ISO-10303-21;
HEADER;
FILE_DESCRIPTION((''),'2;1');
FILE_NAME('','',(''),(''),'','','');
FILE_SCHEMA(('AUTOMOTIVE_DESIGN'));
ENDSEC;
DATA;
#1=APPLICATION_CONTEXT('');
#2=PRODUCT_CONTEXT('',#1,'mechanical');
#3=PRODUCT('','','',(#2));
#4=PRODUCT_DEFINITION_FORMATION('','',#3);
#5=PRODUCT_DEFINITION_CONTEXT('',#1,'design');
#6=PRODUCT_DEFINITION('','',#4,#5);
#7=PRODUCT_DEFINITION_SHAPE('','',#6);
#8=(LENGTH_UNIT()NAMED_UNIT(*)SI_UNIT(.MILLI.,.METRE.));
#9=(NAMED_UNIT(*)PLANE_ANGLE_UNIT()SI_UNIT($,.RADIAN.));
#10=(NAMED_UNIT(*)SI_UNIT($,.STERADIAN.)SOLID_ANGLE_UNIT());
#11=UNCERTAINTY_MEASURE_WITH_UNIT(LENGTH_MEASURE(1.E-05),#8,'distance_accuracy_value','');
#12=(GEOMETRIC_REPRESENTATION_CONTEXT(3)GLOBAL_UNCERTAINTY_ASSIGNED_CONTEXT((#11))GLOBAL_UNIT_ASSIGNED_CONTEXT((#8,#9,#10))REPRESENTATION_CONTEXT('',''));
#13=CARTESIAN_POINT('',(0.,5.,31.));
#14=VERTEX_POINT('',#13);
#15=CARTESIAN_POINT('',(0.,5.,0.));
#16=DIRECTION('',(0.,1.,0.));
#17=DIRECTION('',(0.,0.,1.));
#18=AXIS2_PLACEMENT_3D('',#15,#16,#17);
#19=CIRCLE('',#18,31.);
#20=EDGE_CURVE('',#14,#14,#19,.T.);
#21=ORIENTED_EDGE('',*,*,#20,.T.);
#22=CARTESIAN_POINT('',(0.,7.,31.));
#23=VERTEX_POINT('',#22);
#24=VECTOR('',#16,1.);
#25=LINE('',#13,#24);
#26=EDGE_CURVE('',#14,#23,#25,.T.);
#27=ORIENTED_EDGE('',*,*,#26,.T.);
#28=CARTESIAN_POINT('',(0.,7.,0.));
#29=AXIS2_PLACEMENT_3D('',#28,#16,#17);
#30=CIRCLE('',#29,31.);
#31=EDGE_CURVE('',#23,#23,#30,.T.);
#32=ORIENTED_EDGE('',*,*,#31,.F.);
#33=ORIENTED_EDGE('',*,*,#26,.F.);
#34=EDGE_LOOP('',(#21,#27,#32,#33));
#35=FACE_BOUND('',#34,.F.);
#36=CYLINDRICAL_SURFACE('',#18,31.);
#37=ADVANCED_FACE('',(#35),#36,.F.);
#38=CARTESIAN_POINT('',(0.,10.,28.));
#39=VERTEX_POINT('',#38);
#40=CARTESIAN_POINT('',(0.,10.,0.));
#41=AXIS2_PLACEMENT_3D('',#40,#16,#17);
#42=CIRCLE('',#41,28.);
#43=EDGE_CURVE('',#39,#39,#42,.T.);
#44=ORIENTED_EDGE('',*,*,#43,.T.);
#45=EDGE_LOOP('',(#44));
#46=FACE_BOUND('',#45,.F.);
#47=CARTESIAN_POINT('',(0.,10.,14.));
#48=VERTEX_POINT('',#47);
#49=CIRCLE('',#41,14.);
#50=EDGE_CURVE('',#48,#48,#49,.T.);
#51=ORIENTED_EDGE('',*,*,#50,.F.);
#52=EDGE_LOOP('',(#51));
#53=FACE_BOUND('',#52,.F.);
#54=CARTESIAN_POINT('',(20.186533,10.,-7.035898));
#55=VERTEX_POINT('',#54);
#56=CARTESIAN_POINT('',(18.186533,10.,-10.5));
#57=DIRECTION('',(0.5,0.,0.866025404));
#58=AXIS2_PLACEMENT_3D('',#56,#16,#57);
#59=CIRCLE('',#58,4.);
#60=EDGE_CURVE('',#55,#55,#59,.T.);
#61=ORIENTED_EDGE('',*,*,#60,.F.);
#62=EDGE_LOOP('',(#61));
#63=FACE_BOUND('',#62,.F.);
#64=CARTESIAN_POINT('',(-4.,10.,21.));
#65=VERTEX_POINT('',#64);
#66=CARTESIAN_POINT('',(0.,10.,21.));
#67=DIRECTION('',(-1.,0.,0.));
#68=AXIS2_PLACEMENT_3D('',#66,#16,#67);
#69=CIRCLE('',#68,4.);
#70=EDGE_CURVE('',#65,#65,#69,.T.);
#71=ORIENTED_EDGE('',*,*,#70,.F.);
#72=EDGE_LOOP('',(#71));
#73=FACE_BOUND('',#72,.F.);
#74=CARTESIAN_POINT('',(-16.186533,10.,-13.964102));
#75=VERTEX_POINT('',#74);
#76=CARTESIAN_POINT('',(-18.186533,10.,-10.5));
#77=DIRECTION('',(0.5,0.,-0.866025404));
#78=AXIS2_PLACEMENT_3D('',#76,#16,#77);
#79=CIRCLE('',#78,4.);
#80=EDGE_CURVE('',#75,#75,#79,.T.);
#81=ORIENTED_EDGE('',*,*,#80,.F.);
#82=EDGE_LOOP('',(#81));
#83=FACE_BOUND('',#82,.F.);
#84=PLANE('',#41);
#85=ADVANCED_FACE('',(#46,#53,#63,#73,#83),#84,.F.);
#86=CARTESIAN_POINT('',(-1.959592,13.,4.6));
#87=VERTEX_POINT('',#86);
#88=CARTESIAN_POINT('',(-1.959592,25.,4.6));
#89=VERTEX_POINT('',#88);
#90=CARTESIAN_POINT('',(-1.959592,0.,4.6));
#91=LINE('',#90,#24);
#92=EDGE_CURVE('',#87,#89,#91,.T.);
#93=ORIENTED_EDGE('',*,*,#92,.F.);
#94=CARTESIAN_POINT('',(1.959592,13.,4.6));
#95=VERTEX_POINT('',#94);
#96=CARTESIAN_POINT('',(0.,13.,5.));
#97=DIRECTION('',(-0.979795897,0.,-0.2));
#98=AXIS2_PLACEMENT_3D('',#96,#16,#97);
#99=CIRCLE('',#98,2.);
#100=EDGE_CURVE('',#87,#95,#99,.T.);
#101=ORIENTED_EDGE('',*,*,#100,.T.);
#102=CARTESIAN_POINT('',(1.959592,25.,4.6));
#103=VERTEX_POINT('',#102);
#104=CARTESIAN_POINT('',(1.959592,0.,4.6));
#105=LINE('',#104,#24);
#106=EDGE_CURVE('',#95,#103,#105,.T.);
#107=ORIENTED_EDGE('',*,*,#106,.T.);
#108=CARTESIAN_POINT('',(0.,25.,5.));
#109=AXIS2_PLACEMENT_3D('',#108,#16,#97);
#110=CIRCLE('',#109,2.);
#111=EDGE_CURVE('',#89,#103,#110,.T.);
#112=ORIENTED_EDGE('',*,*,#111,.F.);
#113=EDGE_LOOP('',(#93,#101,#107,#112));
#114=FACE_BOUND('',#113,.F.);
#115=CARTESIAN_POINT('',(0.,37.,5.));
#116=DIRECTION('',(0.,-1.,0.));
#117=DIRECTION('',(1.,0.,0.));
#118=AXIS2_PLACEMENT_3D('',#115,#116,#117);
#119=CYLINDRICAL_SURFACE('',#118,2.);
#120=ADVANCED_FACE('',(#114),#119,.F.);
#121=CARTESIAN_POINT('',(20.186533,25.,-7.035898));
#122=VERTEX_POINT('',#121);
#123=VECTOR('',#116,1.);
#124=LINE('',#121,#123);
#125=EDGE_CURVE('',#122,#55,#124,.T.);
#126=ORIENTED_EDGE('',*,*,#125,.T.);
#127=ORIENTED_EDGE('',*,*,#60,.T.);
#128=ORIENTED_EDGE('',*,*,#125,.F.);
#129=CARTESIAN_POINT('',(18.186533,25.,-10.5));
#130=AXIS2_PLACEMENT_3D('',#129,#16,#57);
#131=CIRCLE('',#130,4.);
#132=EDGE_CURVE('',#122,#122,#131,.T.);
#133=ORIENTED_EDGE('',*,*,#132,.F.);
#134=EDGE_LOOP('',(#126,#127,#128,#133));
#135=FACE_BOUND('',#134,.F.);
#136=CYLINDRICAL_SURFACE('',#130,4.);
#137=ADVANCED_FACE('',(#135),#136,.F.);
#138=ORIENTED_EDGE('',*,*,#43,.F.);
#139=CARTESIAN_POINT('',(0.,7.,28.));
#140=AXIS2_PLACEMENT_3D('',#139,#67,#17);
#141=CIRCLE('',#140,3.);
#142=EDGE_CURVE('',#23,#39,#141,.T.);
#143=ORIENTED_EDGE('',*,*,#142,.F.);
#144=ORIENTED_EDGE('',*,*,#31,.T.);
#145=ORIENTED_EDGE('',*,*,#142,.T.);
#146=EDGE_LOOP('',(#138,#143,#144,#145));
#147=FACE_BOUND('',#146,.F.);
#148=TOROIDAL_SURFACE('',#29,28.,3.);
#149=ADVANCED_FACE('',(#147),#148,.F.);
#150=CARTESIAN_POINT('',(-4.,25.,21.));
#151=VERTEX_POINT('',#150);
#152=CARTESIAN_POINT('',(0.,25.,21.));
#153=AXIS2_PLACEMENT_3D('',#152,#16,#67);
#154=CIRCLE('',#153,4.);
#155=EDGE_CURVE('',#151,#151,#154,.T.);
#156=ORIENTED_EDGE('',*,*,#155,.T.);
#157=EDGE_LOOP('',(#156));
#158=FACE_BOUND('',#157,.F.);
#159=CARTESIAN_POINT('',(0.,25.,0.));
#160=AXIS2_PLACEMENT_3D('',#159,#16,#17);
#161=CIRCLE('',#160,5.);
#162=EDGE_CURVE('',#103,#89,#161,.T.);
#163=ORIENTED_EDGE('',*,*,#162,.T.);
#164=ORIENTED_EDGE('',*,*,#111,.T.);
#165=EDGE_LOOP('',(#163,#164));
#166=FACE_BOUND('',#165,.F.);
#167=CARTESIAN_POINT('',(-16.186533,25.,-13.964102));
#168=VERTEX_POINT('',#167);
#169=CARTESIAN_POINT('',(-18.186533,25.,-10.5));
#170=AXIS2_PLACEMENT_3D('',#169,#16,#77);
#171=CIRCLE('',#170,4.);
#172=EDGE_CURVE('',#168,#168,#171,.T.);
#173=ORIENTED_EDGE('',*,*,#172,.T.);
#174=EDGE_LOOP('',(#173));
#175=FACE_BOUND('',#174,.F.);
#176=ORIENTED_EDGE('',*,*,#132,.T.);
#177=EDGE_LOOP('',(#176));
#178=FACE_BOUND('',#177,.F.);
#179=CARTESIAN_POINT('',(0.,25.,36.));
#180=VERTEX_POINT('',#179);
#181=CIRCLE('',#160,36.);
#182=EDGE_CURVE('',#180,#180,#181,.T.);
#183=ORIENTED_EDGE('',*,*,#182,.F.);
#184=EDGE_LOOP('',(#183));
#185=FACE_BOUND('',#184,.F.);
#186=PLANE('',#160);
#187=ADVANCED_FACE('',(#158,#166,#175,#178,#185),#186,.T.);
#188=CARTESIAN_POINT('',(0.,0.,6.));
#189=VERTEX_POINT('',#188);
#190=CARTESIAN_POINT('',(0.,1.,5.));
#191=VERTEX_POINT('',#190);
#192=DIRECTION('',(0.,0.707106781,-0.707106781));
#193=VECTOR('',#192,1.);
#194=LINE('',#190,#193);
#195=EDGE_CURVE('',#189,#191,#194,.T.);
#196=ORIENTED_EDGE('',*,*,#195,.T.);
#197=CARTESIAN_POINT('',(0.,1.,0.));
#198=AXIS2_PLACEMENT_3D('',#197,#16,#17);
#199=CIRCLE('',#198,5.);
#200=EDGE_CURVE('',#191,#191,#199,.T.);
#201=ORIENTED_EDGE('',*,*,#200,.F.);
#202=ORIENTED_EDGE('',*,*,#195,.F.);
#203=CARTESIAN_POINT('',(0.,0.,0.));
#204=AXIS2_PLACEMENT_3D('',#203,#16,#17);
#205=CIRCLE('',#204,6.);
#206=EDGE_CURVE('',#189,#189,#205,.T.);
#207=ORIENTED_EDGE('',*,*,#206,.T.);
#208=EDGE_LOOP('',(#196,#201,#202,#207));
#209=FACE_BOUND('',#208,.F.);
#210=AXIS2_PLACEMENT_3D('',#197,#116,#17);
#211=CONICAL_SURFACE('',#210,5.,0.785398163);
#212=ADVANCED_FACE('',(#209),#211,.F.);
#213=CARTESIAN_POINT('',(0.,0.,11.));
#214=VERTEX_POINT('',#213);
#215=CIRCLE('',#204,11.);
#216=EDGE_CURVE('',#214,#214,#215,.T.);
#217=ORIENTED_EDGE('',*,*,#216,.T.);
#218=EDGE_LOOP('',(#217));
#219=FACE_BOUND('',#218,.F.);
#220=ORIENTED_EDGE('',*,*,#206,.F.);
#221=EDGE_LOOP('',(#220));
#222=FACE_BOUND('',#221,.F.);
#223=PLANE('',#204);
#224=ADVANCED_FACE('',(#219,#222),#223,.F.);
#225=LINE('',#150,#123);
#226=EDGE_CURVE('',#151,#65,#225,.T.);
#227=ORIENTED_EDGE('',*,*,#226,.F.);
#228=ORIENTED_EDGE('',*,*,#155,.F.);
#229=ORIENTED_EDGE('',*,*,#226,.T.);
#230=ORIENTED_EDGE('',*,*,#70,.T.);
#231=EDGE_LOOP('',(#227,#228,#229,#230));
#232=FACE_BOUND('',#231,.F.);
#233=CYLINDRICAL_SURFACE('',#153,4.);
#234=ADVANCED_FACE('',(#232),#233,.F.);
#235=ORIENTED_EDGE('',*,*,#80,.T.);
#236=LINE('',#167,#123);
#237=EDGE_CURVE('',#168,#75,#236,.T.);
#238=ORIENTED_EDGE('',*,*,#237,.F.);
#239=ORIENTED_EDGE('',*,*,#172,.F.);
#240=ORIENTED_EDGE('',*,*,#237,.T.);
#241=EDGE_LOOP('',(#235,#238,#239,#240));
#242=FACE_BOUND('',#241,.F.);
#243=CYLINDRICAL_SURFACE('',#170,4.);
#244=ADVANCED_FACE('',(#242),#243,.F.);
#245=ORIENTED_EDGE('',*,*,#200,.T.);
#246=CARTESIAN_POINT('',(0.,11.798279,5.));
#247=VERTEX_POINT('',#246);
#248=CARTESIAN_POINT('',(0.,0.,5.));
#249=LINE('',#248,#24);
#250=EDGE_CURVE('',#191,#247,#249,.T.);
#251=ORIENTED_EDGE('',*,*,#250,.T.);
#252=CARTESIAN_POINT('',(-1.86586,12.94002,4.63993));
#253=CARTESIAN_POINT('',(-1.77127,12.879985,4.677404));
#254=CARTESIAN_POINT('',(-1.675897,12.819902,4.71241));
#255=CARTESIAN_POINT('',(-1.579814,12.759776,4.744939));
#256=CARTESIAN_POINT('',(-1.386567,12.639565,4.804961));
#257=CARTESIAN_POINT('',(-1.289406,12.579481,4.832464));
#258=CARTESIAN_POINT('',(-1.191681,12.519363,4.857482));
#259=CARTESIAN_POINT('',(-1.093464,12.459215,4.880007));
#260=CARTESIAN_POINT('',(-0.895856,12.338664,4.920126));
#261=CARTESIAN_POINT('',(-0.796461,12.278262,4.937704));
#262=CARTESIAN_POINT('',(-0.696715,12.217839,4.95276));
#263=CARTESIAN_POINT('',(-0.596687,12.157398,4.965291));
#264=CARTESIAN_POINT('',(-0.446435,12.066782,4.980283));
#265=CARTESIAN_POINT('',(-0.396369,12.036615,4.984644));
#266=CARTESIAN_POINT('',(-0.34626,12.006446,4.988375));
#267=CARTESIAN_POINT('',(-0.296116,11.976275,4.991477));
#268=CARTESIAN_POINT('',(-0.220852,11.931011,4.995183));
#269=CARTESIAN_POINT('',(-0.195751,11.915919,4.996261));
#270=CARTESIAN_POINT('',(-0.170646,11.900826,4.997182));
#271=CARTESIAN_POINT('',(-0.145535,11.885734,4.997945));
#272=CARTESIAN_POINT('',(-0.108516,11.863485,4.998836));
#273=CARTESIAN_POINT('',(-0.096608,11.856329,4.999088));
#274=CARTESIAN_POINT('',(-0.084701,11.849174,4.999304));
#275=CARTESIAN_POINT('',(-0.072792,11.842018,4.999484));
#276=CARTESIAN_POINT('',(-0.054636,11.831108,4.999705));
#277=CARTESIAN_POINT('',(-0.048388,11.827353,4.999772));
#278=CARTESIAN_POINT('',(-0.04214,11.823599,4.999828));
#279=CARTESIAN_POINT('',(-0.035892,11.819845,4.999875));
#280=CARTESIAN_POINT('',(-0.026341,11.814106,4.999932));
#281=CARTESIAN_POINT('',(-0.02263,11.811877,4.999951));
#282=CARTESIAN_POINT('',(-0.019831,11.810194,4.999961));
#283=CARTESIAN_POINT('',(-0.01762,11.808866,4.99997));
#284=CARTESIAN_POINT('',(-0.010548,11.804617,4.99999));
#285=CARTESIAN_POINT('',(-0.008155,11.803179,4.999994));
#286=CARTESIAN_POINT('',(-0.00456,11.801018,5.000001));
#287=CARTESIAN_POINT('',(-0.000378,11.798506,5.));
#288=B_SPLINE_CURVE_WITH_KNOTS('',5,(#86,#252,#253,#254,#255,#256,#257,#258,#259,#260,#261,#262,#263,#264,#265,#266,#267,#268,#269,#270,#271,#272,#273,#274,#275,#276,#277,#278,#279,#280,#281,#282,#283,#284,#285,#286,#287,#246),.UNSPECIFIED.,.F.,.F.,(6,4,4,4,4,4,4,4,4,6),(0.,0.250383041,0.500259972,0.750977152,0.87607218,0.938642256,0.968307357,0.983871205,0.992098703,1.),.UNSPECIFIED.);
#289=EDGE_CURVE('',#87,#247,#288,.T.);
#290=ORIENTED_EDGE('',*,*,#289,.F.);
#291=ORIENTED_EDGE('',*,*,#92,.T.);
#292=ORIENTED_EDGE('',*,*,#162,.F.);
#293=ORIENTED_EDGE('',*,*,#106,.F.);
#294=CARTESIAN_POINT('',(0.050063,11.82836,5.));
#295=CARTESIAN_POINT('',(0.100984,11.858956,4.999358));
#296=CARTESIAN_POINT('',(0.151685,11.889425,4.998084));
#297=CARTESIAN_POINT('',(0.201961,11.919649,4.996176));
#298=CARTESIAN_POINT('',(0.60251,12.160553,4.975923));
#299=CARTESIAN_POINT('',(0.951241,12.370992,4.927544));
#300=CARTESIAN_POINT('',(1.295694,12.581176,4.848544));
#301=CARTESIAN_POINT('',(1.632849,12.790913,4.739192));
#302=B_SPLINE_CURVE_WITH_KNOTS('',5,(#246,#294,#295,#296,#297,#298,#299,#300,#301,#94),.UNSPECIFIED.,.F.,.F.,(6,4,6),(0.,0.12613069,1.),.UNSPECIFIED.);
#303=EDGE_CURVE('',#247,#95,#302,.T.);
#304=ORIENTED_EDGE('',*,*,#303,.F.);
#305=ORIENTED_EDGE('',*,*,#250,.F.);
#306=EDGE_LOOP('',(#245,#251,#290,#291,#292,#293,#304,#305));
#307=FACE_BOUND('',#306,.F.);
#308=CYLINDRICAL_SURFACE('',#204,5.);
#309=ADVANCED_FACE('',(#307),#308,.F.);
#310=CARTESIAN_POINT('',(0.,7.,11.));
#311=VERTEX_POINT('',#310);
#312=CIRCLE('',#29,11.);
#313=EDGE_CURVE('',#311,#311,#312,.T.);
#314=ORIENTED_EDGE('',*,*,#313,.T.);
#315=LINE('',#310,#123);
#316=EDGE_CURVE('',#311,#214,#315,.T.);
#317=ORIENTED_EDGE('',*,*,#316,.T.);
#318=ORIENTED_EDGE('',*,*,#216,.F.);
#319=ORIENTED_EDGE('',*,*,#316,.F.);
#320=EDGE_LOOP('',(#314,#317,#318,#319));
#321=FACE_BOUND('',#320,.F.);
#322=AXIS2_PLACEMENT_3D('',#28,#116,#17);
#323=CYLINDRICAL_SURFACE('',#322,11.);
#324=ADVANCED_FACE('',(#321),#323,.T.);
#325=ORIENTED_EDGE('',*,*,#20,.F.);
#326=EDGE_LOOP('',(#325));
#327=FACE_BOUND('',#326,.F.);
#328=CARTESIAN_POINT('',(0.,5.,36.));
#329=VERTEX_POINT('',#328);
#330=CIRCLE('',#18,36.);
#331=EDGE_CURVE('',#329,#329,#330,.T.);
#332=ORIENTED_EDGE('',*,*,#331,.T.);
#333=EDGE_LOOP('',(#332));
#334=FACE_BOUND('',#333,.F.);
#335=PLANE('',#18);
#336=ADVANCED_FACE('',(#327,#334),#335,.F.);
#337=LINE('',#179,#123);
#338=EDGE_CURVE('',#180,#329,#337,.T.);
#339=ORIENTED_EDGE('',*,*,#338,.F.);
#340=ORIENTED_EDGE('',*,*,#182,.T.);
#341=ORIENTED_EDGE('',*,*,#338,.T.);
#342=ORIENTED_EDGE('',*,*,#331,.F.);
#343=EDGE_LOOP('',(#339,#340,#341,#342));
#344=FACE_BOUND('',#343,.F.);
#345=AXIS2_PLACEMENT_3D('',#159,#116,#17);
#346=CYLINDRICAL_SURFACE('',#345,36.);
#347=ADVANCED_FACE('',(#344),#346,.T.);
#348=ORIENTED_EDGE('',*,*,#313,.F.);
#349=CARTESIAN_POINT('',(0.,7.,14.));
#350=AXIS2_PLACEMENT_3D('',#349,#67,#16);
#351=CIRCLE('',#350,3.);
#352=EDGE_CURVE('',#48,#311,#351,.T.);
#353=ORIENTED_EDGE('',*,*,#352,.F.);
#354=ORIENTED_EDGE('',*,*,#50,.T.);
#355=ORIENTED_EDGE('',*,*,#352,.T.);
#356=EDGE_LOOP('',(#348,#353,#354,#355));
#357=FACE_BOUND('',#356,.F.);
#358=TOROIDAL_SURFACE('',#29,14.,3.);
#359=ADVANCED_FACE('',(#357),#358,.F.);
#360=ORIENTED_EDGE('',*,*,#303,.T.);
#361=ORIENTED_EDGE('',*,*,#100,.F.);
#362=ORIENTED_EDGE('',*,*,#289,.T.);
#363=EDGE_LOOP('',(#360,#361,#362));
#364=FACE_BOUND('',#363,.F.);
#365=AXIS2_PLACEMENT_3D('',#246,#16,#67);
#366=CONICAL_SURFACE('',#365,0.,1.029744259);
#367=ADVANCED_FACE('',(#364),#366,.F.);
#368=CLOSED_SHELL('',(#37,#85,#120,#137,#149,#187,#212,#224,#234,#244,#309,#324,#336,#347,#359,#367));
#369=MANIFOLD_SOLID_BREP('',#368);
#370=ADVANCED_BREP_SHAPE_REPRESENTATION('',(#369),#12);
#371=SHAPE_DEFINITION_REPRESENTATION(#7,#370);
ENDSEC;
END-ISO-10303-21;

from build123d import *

# Parameters (mm, degrees)
F2_SIZE         = 1
F3_R            = 4
F4_DEPTH        = 15
F4_COPIES_COUNT = 3
F6_D            = 4
F6_DEPTH        = 12
F6_TIP          = 1.2017212381


# Not quite as in the source:
# - a pattern or mirror of a feature is missing from the dataset's text; its kind, count and spacing are read off the source's solid


with BuildPart() as f1:
    # F0 (on Right) → F1 (revolve)
    with BuildSketch(Plane.YZ):
        with BuildLine():
            Line((0, 11), (0, 5))
            Line((0, 5), (25, 5))
            Line((25, 5), (25, 36))
            Line((25, 36), (5, 36))
            Line((5, 36), (5, 31))
            Line((5, 31), (7, 31))
            ThreePointArc((7, 31), (9.1213203436, 30.1213203436), (10, 28))
            Line((10, 28), (10, 14))
            ThreePointArc((10, 14), (9.1213203436, 11.8786796564), (7, 11))
            Line((7, 11), (0, 11))
        make_face()
    revolve(axis=Axis((0, 9.0291841974, 0), (0, 1, 0)))

    # F2
    f2_edges = [f1.edges().sort_by_distance(p)[0] for p in [
        (0, 0, -5),
    ]]
    chamfer(f2_edges, length=F2_SIZE)

    # F3 (on face) → F4 (cut, through all)
    with BuildSketch(Plane(origin=(0, 25, 0), x_dir=(-1, 0, 0), z_dir=(0, 1, 0))):
        with Locations((0, 21)):
            Circle(F3_R)
    f4 = extrude(amount=-F4_DEPTH, mode=Mode.SUBTRACT)

    # F4_copies: F4 ×3 about axis
    f4_copies_axis = Axis((0, 0, 0), (0, 1, 0))
    for i in range(1, F4_COPIES_COUNT):
        add(f4.rotate(f4_copies_axis, i * 360 / F4_COPIES_COUNT), mode=Mode.SUBTRACT)

    # F6
    with Locations(Plane(origin=(0, 25, 0), x_dir=(-1, 0, 0), z_dir=(0, 1, 0))):
        with Locations((0, 5)):
            Hole(F6_D / 2, depth=F6_DEPTH)
            with Locations((0, 0, -(F6_DEPTH + F6_TIP / 2))):  # 118° drill point
                Cone(0, F6_D / 2, F6_TIP, mode=Mode.SUBTRACT)


solid = f1.part
